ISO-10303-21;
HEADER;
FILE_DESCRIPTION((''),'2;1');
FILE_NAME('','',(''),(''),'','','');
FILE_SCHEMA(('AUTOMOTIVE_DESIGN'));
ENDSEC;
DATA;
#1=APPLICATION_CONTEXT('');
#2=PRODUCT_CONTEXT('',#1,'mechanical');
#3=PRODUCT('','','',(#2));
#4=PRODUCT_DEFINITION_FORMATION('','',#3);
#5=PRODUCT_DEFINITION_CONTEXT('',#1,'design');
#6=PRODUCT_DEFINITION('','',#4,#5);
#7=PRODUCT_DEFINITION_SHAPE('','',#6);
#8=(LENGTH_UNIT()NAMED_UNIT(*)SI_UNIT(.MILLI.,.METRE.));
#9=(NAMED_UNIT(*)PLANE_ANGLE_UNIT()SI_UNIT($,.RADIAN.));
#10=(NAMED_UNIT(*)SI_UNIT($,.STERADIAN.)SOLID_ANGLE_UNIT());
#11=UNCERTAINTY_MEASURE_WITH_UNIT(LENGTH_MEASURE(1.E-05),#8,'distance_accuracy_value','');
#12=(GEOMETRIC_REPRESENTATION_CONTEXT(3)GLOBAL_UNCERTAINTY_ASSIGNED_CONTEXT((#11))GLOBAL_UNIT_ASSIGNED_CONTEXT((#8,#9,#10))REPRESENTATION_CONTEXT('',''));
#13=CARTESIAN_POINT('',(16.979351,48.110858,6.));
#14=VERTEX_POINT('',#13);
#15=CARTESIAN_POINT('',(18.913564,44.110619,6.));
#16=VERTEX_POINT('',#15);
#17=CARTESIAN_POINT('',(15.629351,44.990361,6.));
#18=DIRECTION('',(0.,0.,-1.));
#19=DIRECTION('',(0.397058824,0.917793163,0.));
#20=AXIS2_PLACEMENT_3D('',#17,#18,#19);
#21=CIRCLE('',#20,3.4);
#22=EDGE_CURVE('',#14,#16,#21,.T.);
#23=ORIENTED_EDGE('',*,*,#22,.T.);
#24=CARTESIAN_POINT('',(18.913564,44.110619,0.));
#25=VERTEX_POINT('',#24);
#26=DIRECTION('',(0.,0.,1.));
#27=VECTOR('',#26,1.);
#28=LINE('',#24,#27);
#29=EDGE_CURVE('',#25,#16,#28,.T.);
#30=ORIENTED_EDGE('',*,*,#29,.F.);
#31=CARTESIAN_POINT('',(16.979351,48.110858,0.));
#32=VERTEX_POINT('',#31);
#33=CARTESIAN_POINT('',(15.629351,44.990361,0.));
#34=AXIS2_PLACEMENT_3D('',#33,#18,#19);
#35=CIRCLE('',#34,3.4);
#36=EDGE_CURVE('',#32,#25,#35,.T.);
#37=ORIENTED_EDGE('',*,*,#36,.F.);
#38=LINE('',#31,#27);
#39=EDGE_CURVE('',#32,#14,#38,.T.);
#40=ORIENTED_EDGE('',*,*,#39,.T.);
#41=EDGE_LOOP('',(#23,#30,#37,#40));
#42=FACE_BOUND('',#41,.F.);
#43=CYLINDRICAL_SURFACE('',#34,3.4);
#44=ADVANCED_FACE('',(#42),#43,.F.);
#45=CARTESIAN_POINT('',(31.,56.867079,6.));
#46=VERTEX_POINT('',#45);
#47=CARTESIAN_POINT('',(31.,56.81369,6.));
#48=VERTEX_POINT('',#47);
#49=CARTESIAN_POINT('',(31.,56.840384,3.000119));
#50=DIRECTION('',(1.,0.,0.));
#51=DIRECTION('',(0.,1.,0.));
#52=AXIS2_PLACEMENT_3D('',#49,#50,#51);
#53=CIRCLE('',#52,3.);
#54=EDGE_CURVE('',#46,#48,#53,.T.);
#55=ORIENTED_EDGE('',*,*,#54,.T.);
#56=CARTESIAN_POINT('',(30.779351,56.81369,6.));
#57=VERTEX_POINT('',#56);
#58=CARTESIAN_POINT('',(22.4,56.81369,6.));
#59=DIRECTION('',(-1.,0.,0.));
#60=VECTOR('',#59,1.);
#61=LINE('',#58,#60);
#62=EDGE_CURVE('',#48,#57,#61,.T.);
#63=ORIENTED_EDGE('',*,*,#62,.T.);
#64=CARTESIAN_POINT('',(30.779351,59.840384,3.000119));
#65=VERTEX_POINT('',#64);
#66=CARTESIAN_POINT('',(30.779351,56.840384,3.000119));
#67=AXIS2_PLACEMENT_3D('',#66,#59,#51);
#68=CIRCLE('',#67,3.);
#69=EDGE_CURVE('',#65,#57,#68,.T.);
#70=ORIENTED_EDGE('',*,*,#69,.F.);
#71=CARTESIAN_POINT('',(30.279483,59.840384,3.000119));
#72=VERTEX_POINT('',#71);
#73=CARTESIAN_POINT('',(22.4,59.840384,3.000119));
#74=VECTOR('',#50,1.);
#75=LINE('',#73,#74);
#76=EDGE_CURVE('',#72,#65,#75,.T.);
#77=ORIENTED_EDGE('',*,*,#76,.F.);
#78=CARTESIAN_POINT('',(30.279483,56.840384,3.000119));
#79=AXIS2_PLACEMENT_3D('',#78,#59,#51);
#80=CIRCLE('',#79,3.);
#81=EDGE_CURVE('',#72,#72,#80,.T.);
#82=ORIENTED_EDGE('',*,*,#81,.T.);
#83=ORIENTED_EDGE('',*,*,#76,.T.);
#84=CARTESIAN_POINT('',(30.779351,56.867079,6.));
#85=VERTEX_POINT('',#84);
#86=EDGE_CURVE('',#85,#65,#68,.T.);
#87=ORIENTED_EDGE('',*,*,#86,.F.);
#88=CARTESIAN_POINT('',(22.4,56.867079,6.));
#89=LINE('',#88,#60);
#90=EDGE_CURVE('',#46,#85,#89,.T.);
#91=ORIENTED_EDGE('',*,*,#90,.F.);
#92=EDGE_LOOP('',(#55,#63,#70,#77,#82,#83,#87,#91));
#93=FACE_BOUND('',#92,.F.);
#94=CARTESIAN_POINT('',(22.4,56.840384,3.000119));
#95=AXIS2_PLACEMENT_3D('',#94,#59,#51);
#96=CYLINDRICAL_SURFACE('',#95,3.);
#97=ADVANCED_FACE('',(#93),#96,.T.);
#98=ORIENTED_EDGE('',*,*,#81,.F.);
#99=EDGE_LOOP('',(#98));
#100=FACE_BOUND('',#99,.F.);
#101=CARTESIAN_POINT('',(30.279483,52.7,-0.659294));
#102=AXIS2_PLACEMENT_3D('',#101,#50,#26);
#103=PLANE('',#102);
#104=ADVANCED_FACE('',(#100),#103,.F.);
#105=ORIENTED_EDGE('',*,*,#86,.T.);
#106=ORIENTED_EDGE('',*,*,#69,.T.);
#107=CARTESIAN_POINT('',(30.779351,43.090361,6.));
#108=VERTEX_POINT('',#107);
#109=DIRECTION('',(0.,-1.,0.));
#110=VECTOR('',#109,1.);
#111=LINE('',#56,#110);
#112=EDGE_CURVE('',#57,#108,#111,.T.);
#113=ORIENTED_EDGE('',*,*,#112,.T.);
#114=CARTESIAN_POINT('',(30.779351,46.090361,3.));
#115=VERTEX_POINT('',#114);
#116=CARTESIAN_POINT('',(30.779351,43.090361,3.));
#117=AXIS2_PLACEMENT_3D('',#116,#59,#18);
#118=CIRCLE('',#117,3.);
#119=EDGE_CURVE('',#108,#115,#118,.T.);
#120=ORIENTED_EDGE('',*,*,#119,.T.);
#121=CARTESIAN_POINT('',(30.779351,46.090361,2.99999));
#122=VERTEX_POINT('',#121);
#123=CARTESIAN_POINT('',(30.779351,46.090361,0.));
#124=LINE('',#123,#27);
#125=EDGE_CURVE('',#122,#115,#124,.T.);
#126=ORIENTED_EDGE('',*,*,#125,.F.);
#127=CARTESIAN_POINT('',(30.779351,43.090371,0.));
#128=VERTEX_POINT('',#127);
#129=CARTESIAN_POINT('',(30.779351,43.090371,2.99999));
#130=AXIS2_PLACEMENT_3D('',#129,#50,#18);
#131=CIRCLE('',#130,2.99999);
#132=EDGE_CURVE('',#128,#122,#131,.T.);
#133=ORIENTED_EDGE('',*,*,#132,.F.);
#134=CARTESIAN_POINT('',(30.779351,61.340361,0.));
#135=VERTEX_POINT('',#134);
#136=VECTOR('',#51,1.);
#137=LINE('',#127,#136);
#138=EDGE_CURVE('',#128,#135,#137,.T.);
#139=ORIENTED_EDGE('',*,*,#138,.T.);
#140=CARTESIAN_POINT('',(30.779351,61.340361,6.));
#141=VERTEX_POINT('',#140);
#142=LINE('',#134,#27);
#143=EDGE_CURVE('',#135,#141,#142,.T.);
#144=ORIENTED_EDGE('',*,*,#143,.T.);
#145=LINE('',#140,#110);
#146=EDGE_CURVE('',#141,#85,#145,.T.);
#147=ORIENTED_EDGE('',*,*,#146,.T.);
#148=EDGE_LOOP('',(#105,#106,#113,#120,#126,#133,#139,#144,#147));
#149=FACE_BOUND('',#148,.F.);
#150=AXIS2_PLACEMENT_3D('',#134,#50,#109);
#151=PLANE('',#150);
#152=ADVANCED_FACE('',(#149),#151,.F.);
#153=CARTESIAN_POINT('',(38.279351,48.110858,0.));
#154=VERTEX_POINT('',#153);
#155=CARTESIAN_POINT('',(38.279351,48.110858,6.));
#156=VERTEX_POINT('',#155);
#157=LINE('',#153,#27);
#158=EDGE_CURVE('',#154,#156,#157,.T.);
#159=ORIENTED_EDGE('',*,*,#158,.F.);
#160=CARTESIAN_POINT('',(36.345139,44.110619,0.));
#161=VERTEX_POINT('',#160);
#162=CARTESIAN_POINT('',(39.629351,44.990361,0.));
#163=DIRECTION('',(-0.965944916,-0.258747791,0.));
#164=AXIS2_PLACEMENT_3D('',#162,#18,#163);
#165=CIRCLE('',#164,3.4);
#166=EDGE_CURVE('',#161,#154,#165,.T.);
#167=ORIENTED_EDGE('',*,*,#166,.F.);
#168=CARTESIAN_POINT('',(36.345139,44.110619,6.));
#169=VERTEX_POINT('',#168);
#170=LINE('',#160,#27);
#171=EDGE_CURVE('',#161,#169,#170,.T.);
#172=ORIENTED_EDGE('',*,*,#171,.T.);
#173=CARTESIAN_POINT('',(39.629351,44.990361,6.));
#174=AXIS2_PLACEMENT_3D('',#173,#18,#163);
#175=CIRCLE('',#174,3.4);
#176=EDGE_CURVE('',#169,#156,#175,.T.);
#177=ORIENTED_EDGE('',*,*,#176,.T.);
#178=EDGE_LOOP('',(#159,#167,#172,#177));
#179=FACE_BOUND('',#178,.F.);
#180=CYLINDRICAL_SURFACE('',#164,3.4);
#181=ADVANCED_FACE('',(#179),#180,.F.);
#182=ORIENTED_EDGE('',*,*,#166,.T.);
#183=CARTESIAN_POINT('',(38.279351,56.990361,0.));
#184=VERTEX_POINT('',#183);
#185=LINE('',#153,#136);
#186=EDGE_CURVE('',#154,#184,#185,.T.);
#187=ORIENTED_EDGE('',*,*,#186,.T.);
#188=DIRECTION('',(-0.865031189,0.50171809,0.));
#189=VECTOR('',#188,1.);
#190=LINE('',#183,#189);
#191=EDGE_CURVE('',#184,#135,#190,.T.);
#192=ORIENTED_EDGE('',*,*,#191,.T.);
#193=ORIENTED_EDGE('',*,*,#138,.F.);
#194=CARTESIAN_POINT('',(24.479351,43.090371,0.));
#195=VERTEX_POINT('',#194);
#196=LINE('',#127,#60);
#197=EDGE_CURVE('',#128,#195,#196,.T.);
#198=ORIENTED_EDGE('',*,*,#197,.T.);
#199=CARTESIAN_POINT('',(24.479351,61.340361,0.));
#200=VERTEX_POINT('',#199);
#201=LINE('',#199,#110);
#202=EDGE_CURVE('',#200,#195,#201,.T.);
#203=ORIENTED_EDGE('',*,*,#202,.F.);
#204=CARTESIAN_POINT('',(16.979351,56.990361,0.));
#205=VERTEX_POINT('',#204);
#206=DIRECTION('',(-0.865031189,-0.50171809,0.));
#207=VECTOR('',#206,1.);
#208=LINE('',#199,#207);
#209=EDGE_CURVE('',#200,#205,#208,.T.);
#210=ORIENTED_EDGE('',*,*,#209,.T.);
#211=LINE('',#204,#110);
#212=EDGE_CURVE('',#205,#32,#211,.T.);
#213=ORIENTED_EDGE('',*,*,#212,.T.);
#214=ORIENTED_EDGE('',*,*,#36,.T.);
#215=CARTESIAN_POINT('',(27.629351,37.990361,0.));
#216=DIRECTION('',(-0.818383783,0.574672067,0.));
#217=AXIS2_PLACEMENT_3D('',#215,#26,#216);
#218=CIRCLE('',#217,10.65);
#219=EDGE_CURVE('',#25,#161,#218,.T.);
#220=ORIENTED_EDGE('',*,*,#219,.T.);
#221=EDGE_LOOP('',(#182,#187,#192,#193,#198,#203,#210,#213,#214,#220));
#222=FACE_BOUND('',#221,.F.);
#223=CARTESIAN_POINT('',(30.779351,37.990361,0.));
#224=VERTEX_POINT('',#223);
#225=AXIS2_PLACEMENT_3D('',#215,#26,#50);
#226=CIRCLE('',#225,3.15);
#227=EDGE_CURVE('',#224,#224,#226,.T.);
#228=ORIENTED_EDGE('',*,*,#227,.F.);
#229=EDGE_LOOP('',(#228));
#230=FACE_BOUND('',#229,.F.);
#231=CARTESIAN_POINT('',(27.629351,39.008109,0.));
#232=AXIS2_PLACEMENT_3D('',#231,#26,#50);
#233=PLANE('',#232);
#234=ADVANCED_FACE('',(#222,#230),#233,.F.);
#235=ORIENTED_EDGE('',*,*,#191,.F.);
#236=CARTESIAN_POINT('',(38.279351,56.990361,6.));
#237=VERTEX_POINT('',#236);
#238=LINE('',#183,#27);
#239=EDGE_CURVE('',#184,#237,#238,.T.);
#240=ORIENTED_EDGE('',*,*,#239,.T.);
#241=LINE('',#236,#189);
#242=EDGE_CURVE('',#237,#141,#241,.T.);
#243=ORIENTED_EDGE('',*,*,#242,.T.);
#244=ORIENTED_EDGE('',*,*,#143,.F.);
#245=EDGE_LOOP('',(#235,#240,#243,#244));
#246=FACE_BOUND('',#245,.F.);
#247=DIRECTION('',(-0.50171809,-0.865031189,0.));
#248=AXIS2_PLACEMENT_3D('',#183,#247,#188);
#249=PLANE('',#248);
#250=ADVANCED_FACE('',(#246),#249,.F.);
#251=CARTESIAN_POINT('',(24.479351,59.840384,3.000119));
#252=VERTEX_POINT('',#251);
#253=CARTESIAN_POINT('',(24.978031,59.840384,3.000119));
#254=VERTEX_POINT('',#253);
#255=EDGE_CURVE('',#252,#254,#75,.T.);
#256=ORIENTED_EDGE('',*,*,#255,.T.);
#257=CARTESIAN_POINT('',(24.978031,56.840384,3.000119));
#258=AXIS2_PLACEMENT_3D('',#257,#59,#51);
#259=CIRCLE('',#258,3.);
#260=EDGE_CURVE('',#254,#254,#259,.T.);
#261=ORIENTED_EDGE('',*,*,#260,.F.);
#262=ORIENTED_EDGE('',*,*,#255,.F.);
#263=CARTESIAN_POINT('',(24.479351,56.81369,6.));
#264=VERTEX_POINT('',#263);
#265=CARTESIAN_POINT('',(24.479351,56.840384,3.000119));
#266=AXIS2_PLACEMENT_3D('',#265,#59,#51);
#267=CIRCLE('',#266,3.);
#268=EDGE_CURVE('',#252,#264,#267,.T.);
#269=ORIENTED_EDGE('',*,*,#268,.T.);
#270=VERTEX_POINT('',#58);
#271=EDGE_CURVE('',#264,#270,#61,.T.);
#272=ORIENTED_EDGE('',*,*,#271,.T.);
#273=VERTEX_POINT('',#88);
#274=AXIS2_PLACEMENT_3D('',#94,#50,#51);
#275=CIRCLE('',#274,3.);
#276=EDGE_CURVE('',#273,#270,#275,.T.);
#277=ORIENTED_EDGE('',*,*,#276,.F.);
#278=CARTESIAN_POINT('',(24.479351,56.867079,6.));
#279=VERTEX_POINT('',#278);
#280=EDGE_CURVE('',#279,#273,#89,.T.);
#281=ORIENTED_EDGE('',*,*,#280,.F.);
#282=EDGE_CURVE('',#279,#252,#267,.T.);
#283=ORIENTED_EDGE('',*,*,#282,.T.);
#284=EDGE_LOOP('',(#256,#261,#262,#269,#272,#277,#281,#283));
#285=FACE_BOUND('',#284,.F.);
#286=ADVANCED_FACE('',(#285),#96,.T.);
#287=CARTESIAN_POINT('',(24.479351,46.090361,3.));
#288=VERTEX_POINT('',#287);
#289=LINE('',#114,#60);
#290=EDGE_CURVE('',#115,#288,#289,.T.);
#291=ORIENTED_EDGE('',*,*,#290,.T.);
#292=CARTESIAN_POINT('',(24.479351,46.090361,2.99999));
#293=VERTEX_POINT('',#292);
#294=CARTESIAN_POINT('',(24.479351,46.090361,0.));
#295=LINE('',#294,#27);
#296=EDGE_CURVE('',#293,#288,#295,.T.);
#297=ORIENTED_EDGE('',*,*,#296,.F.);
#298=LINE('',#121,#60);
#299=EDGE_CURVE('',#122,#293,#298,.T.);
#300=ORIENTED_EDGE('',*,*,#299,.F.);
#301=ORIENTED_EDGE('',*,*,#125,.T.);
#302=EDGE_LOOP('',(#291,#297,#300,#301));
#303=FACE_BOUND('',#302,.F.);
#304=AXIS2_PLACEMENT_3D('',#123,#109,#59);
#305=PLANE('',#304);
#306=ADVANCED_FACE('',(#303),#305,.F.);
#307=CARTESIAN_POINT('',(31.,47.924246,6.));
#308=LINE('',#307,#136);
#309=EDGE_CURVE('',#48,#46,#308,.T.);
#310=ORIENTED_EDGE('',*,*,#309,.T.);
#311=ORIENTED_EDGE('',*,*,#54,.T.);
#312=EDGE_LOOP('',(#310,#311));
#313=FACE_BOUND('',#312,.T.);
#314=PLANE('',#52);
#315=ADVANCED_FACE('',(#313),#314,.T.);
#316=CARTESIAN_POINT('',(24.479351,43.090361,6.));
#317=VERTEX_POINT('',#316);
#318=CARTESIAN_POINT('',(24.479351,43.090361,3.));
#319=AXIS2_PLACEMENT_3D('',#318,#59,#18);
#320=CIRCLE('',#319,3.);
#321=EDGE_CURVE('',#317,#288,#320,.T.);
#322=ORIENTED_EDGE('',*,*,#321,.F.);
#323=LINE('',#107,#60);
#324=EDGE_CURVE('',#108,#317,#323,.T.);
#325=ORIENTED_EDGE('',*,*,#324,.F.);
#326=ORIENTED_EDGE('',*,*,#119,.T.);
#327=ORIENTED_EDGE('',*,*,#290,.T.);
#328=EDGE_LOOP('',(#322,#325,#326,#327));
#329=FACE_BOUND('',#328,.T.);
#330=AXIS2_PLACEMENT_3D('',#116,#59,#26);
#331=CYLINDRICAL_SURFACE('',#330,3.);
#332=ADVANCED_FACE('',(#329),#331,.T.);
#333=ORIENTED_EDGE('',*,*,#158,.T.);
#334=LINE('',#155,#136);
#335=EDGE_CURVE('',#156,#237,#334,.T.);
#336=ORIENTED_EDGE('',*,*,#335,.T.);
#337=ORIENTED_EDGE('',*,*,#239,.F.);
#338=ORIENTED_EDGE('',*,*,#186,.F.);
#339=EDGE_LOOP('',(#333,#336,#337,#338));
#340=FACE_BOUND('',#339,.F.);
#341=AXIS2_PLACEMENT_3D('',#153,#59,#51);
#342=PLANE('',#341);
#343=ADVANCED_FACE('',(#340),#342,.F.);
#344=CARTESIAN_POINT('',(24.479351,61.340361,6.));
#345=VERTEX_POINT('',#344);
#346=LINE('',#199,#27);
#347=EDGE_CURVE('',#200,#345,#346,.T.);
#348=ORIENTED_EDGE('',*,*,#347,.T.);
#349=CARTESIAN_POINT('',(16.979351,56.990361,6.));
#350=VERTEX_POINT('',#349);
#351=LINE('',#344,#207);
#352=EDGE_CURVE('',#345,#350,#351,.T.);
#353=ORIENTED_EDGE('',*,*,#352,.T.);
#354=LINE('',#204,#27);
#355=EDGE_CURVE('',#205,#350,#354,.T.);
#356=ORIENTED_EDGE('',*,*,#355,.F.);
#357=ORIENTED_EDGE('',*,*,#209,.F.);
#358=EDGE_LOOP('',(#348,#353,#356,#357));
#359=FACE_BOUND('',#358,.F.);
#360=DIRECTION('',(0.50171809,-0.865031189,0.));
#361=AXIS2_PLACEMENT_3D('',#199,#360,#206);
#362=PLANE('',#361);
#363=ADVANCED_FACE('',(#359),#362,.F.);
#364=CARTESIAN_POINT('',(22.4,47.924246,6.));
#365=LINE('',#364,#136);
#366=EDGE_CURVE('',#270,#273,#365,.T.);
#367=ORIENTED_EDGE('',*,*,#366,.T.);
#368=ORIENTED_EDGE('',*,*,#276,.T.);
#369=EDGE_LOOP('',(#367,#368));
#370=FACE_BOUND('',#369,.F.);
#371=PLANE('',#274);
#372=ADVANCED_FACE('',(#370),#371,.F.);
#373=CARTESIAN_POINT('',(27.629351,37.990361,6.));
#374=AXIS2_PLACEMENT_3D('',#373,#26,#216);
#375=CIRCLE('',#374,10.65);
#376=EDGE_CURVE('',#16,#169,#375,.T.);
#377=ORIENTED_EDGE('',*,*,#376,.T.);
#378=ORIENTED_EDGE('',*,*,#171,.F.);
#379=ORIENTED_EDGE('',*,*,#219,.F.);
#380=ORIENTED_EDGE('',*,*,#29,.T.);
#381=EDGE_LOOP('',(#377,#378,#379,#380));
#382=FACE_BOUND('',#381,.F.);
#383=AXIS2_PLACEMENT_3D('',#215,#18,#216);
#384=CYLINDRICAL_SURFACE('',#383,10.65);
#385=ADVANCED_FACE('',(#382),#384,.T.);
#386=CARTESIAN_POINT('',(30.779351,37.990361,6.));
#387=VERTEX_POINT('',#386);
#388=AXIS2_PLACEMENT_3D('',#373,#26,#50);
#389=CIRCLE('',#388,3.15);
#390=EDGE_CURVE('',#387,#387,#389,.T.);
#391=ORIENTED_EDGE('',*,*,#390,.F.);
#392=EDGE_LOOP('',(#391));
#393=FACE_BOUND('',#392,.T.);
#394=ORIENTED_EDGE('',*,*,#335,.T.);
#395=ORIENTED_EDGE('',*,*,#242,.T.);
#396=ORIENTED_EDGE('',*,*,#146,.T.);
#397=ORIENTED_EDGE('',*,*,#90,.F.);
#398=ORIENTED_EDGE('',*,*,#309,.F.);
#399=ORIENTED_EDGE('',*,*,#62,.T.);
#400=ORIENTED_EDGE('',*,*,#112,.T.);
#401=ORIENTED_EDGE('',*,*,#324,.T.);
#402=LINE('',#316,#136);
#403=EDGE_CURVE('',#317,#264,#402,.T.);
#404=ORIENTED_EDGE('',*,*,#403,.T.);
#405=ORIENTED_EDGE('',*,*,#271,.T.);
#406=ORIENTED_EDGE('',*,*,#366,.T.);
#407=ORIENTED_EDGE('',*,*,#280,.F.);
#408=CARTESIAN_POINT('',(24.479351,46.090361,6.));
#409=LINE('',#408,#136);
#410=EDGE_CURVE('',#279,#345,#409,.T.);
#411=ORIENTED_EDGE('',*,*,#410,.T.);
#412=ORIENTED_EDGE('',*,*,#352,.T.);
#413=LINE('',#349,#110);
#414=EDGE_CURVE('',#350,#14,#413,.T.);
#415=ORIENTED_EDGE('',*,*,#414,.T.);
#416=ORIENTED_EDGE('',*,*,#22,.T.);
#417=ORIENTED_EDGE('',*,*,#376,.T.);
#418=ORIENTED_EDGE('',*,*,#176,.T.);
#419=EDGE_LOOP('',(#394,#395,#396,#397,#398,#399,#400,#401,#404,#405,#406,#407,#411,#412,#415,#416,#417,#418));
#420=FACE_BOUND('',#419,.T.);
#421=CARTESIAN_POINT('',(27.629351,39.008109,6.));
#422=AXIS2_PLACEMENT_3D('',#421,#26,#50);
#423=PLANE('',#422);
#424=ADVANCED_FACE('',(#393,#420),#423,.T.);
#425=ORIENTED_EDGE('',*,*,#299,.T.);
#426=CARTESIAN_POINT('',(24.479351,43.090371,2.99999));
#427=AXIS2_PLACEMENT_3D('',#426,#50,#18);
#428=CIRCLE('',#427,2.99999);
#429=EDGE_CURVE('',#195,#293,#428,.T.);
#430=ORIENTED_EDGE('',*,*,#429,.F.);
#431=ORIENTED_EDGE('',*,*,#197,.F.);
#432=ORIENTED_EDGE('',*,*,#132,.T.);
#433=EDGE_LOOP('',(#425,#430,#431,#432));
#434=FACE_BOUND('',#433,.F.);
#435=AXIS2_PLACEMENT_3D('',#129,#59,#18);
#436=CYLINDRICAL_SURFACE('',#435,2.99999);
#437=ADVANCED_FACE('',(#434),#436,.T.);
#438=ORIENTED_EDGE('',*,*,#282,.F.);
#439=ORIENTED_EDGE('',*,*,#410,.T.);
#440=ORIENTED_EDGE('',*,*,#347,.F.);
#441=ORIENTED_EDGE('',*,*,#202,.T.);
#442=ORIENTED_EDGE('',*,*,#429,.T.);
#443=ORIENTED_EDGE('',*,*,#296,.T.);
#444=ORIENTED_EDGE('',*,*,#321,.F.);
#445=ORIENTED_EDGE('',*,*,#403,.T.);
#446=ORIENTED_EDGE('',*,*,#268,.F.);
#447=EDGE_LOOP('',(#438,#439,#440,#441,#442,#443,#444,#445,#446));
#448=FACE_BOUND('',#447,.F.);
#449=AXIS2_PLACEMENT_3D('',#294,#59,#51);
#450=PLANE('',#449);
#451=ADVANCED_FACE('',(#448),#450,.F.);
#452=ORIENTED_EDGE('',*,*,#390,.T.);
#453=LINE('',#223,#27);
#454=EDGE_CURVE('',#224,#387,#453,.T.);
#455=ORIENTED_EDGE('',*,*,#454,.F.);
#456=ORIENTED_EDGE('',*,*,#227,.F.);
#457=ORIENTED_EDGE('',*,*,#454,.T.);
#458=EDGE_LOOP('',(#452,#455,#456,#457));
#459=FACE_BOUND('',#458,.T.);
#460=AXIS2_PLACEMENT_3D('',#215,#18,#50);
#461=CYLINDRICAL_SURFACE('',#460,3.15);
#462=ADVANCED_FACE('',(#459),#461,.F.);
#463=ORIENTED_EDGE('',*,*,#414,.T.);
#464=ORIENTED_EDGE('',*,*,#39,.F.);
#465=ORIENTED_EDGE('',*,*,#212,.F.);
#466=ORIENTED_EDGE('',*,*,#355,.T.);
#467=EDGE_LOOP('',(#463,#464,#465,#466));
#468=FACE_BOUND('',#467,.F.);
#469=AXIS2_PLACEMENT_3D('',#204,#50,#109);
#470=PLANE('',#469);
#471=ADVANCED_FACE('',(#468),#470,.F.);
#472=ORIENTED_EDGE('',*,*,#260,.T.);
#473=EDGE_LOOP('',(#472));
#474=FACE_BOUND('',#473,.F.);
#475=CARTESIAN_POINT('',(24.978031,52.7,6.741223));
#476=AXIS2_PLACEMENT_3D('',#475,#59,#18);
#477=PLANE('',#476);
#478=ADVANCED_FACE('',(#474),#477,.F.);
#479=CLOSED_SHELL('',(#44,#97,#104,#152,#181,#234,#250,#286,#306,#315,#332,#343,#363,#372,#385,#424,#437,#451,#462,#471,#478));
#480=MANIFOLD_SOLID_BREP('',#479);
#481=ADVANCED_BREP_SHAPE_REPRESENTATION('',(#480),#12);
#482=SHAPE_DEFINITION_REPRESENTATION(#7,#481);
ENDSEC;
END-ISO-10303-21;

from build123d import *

# Parameters (mm, degrees)
F0_R     = 3.15
F1_DEPTH = 6
F3_START = 22.4
F2_R     = 3
F3_DEPTH = 8.6
F5_START = -52.7
F5_DEPTH = 11
F6_R     = 3
F7_R     = 2.99999


# Not quite as in the source:
# - a fillet or chamfer is up to 0.001 mm smaller than in the source, because OpenCascade refuses the exact size


with BuildPart() as f1:
    # F0 (on Top) → F1 (new body)
    with BuildSketch(Plane.XY):
        with BuildLine():
            Line((24.4793512434, 46.0903614521), (24.4793512434, 48.1638564268))
            ThreePointArc((24.4793512434, 48.1638564268), (21.3598687714, 46.599431642), (18.9135639574, 44.1106189618))
            ThreePointArc((18.9135639574, 44.1106189618), (27.6293512434, 27.3403614521), (36.3451385294, 44.1106189618))
            ThreePointArc((36.3451385294, 44.1106189618), (33.8988337153, 46.599431642), (30.7793512434, 48.1638564268))
            Line((30.7793512434, 48.1638564268), (30.7793512434, 46.0903614521))
            Line((30.7793512434, 46.0903614521), (27.6293512434, 46.0903614521))
            Line((27.6293512434, 46.0903614521), (24.4793512434, 46.0903614521))
        make_face()
        with Locations((27.6293512434, 37.9903614521)):
            Circle(F0_R, mode=Mode.SUBTRACT)
        with BuildLine():
            ThreePointArc((18.9135639574, 44.1106189618), (21.3598687714, 46.599431642), (24.4793512434, 48.1638564268))
            Line((24.4793512434, 48.1638564268), (24.4793512434, 61.3403614521))
            Line((24.4793512434, 61.3403614521), (16.9793512434, 56.9903614521))
            Line((16.9793512434, 56.9903614521), (16.9793512434, 48.1108582074))
            ThreePointArc((16.9793512434, 48.1108582074), (18.6903086712, 46.4704086219), (18.9135639574, 44.1106189618))
        make_face()
        with BuildLine():
            ThreePointArc((30.7793512434, 48.1638564268), (33.8988337153, 46.599431642), (36.3451385294, 44.1106189618))
            ThreePointArc((36.3451385294, 44.1106189618), (36.5683938155, 46.4704086219), (38.2793512434, 48.1108582074))
            Line((38.2793512434, 48.1108582074), (38.2793512434, 56.9903614521))
            Line((38.2793512434, 56.9903614521), (30.7793512434, 61.3403614521))
            Line((30.7793512434, 61.3403614521), (30.7793512434, 48.1638564268))
        make_face()
    extrude(amount=F1_DEPTH)

    # F2 (on Right) → F3 (join)
    with BuildSketch(Plane.YZ.offset(F3_START)):
        with Locations((56.8403841853, 3.0001187697)):
            Circle(F2_R)
    extrude(amount=F3_DEPTH)

    # F4 (on Front) → F5 (cut)
    with BuildSketch(Plane.XZ.offset(F5_START)):
        Polygon((30.2794827968, -0.6592939026), (30.2794827968, 3.0006368179), (30.2794827968, 6.7412233911), (24.9780313224, 6.7412233911), (24.9780313224, -0.6592939026), align=None)
    extrude(amount=-F5_DEPTH, mode=Mode.SUBTRACT)

    # F6
    f6_edges = [f1.edges().sort_by_distance(p)[0] for p in [
        (27.629351, 46.090361, 6),
    ]]
    fillet(f6_edges, radius=F6_R)

    # F7 (radius 3 in the source; OpenCascade refuses exactly that, so slightly less here)
    f7_edges = [f1.edges().sort_by_distance(p)[0] for p in [
        (27.629351, 46.090361, 0),
    ]]
    fillet(f7_edges, radius=F7_R)


solid = f1.part
